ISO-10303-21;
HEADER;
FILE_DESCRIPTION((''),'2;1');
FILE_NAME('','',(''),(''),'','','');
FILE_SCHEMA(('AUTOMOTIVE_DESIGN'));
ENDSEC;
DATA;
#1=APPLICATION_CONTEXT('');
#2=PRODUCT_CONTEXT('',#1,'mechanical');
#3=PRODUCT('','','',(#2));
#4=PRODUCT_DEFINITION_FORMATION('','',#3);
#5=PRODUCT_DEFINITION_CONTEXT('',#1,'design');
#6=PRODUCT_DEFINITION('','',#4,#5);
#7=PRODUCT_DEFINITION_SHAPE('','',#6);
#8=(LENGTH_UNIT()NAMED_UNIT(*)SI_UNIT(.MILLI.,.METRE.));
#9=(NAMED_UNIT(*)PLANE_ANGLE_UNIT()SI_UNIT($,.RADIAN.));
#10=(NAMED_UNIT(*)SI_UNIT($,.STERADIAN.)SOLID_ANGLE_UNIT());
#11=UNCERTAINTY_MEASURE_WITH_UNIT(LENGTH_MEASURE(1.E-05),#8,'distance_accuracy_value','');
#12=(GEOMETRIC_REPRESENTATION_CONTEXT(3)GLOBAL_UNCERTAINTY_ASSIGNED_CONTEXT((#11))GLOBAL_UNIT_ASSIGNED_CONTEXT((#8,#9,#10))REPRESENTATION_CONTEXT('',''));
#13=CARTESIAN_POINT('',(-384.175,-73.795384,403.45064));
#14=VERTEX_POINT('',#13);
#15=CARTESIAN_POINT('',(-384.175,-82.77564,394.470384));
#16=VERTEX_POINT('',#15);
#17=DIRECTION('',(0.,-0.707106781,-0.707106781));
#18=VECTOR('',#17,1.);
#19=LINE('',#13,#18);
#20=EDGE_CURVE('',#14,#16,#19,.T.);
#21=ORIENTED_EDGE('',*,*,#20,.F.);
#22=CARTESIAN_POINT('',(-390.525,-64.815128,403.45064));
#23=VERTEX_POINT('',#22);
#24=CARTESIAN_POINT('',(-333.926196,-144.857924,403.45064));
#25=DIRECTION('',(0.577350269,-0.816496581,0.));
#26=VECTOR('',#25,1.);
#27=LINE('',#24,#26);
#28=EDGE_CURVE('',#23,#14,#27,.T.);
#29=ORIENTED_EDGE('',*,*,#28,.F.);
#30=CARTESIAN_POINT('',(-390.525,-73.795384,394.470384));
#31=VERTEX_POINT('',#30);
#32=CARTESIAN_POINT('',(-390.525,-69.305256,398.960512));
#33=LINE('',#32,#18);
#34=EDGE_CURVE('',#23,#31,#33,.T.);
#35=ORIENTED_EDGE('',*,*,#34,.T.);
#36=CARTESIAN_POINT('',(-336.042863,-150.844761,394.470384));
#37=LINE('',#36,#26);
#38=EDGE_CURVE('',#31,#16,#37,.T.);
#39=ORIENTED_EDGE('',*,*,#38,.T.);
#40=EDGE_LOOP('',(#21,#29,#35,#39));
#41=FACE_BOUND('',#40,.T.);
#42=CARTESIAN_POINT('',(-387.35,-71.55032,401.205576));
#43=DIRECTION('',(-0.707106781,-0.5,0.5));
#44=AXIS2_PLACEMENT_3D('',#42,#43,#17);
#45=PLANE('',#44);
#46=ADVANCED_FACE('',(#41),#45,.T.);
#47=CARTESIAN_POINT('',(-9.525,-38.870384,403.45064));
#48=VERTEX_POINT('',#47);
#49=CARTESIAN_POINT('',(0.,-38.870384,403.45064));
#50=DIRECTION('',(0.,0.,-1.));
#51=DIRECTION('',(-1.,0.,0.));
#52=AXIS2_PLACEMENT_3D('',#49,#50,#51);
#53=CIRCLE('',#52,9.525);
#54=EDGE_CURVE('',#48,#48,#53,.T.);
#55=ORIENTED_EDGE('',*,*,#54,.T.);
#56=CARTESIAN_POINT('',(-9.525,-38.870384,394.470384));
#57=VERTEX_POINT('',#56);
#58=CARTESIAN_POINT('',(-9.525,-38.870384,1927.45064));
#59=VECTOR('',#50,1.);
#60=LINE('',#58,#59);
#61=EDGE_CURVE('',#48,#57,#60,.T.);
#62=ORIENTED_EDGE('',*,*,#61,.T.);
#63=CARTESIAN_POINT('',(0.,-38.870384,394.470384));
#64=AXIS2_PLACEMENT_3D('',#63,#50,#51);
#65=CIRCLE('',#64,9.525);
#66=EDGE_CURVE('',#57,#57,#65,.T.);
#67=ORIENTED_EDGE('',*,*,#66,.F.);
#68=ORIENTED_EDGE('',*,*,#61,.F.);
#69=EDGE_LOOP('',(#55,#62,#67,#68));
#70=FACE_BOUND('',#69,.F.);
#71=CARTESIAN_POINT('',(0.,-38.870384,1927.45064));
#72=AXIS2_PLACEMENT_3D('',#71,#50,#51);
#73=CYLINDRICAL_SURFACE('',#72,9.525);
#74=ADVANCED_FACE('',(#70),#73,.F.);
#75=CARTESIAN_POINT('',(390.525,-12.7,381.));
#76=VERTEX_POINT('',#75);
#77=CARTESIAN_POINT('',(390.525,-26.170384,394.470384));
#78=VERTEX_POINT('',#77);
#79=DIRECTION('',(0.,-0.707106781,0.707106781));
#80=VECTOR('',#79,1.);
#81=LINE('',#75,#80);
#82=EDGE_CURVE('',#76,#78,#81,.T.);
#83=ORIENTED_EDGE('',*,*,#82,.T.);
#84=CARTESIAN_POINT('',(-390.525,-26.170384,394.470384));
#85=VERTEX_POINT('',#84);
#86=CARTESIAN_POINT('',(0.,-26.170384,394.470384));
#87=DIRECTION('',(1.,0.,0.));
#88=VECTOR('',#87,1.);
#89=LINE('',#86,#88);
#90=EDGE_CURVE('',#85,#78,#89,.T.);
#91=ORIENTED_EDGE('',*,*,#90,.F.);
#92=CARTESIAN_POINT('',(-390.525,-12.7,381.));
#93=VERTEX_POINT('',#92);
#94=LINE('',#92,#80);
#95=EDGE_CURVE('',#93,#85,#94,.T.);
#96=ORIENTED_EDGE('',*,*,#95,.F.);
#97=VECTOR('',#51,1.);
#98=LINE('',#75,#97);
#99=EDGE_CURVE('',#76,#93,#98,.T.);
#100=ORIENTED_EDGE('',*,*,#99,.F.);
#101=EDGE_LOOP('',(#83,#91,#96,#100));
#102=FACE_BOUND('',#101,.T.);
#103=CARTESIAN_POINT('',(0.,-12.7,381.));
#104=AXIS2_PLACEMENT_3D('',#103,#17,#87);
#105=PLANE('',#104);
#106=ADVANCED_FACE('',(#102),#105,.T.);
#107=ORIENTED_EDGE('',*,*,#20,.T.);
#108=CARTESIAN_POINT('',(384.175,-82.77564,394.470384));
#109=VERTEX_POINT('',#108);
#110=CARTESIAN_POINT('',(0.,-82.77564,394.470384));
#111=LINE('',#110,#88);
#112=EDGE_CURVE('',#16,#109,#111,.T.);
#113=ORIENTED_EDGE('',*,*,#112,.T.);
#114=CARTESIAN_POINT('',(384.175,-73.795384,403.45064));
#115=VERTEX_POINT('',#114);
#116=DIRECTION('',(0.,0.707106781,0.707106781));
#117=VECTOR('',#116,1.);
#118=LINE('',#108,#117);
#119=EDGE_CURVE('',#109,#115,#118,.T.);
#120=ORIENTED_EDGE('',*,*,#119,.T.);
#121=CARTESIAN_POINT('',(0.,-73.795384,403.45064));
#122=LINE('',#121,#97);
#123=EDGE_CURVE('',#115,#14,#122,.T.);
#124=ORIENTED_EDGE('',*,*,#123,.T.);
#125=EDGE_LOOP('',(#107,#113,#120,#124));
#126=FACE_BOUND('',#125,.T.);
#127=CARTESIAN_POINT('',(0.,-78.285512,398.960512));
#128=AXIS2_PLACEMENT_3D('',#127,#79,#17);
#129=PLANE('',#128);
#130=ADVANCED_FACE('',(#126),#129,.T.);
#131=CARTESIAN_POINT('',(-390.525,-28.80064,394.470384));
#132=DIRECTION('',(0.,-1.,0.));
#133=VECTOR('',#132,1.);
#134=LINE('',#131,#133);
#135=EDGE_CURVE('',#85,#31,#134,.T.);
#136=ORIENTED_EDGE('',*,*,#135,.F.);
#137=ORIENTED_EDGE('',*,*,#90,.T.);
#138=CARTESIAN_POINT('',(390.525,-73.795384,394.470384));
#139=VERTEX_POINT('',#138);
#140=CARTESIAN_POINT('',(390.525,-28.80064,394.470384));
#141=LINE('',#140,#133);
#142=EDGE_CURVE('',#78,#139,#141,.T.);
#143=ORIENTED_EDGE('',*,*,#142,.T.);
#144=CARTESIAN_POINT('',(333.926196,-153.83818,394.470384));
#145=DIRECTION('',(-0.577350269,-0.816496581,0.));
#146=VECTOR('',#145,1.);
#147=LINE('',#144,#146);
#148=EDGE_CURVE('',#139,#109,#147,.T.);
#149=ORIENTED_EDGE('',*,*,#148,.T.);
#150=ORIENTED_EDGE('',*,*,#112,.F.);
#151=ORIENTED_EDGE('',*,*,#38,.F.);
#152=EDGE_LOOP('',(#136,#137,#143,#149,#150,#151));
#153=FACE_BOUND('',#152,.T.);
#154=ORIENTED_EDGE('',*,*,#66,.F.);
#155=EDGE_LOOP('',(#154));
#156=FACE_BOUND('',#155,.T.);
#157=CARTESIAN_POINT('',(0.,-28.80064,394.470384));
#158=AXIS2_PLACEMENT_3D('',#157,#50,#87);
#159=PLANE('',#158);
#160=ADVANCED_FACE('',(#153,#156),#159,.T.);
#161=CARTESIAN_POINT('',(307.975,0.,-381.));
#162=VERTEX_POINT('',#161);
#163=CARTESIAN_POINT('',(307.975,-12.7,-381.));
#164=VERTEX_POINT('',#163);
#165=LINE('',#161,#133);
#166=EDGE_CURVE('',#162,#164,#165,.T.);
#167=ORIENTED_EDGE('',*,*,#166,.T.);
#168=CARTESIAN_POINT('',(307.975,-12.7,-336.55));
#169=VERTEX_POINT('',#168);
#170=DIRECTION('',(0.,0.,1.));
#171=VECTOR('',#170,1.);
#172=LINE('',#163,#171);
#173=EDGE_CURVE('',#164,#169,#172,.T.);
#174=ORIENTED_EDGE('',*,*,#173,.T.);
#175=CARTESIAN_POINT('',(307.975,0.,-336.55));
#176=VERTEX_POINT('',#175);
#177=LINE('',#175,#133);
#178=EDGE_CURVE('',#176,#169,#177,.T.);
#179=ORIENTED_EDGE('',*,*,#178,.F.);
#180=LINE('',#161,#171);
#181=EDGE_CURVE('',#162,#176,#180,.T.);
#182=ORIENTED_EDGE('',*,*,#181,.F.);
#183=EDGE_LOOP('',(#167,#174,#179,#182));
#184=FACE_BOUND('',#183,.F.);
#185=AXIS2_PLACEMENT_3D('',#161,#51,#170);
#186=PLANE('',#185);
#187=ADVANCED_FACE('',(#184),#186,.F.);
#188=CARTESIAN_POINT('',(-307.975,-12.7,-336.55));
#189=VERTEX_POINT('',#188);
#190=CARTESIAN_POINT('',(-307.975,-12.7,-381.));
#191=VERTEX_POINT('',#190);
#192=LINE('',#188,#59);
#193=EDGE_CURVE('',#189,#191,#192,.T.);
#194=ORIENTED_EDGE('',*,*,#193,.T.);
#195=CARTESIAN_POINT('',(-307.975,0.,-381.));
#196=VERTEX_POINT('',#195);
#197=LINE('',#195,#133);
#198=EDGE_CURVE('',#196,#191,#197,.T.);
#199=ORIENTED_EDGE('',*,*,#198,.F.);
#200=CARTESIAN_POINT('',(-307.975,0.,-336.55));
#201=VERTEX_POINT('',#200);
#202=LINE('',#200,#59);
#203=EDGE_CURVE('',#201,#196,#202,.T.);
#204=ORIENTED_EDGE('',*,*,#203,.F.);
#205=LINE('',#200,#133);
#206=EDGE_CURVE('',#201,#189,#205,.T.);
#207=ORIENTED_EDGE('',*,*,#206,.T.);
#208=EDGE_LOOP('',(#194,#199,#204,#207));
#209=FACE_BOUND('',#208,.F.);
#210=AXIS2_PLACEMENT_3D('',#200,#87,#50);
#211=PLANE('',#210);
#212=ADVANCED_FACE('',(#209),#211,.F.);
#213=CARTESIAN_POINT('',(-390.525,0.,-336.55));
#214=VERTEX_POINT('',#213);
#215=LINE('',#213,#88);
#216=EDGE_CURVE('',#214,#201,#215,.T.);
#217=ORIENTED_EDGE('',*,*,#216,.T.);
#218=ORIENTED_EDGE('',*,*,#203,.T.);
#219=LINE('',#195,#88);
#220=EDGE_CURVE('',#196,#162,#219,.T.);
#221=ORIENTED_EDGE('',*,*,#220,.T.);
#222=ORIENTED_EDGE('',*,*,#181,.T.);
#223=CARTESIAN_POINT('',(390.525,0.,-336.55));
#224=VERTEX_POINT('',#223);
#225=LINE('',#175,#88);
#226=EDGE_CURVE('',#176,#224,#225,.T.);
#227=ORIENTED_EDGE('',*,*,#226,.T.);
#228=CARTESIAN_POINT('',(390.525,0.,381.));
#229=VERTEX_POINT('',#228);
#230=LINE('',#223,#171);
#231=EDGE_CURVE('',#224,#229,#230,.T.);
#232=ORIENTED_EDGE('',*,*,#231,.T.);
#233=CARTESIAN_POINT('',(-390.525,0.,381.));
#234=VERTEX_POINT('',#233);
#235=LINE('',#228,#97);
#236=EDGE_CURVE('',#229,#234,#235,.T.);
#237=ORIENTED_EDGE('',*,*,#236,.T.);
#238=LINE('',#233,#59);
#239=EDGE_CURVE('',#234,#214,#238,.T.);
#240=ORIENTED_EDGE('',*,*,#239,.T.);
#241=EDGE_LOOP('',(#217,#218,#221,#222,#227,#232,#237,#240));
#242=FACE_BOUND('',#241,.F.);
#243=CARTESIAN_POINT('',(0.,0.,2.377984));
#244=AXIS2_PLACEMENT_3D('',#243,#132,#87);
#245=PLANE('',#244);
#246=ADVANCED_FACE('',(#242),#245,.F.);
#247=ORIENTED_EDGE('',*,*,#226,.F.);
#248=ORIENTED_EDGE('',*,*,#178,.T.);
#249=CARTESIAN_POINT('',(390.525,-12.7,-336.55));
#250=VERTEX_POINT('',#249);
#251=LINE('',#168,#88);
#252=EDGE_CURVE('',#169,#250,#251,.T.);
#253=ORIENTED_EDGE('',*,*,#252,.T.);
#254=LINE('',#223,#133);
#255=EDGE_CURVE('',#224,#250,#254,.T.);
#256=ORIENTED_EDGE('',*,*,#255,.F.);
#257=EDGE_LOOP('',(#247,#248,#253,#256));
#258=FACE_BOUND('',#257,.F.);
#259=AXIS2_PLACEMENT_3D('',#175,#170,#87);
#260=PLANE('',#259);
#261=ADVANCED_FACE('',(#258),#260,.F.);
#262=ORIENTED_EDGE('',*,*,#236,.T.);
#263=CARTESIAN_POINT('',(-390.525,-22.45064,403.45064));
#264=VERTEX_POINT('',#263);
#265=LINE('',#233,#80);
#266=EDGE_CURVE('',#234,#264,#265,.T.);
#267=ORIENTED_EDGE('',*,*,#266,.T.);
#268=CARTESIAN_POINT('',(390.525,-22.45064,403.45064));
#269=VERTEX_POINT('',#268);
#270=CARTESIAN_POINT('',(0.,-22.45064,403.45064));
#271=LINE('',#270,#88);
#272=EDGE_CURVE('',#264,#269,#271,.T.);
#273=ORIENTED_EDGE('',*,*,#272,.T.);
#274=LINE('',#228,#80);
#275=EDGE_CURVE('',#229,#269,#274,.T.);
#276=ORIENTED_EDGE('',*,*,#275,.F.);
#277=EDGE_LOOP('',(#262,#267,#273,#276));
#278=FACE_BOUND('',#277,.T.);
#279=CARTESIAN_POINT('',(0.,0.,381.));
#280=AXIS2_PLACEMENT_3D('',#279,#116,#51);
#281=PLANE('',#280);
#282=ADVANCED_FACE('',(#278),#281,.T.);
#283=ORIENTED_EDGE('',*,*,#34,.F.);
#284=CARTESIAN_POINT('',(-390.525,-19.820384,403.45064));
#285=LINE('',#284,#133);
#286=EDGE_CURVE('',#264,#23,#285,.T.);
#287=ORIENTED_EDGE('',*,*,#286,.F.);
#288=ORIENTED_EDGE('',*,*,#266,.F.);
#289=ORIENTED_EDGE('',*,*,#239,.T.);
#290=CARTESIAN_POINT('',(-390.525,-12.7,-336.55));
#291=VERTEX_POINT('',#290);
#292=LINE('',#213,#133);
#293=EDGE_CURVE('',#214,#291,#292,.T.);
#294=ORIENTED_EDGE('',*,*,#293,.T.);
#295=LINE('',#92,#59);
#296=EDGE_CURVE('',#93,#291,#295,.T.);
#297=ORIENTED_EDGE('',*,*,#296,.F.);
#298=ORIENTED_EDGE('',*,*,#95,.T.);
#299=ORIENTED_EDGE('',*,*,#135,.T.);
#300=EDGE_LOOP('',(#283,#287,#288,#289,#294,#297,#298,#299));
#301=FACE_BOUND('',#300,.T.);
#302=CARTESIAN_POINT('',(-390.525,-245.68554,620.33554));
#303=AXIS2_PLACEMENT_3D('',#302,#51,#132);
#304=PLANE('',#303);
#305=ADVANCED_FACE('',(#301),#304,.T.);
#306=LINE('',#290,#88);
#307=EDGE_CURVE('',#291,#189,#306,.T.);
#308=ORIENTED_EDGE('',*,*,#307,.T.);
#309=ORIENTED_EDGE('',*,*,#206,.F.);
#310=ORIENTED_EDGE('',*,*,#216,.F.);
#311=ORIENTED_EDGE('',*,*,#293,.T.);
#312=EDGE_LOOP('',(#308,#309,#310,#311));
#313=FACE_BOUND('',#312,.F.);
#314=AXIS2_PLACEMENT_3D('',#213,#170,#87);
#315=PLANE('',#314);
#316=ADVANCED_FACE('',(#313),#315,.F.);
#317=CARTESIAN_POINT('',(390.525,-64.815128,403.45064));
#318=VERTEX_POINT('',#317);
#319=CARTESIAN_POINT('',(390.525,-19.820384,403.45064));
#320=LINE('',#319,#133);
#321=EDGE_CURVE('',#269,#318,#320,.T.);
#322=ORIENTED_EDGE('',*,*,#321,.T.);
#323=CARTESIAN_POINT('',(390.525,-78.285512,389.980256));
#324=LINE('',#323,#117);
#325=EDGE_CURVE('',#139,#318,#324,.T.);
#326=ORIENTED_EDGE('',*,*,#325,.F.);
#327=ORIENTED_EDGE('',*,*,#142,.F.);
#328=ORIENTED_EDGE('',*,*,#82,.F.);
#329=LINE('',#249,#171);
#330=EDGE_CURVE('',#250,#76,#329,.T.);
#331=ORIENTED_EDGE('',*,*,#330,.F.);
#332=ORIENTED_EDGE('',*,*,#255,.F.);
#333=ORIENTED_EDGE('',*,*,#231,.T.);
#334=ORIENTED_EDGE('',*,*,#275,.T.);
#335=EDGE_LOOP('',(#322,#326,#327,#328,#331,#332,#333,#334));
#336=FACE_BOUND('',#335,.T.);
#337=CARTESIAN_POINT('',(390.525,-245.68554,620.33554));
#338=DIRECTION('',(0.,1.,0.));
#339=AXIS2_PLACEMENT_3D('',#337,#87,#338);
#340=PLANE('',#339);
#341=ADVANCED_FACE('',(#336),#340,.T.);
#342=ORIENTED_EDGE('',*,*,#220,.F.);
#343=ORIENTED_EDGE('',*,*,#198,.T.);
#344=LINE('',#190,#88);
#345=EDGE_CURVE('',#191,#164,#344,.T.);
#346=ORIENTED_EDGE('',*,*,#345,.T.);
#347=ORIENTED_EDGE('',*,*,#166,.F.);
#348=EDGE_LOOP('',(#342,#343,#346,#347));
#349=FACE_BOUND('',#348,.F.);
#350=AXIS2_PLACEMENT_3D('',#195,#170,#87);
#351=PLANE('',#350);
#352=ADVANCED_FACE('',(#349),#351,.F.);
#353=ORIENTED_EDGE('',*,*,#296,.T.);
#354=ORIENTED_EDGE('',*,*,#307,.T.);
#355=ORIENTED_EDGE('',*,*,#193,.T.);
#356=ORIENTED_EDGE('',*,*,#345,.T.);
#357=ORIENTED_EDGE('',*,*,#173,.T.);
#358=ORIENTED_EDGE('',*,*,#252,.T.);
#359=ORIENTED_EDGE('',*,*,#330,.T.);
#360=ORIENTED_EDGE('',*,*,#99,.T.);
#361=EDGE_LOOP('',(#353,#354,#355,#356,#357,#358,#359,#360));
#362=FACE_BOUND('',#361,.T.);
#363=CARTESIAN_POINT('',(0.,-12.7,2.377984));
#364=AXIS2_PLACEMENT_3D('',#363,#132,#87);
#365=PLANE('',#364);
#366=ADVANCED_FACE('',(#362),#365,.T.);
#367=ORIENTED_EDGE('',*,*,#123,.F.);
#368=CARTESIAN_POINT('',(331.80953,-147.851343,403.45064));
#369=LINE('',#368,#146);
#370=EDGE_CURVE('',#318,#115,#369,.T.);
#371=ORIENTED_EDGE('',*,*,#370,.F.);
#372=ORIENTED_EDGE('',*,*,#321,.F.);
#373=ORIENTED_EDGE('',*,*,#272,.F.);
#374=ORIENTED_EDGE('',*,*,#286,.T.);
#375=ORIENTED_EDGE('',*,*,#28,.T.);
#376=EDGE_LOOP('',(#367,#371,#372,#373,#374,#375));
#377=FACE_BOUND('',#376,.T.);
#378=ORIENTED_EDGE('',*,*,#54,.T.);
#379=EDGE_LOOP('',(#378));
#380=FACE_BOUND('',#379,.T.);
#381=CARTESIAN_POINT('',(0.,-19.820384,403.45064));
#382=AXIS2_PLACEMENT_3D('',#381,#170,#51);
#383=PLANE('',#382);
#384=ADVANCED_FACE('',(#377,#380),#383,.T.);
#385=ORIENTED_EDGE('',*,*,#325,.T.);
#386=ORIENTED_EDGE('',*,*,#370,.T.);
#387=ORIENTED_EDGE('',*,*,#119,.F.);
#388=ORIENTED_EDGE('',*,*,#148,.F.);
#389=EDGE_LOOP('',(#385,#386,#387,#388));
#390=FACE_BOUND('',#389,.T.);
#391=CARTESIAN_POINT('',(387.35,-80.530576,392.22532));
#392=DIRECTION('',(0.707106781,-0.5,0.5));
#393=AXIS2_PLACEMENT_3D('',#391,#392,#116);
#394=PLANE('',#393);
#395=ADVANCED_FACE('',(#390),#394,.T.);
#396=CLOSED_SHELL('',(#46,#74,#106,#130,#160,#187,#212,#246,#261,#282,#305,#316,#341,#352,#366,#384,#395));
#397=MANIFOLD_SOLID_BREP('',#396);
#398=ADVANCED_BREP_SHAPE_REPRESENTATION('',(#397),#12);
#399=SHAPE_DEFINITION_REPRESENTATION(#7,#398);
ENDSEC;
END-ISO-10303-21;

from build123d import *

# Parameters (mm, degrees)
F1_DEPTH   = 12.7
F1_FACE1_W = 781.05
F1_FACE1_H = 12.7
F4_SIZE    = 6.35
F6_D       = 19.05
F6_DEPTH   = 1524
F6_TIP     = 5.7231973962


with BuildPart() as f1:
    # F0 (on Front) → F1 (new body)
    with BuildSketch(Plane.XZ):
        Polygon((-307.975, -336.55), (-307.975, -381), (307.975, -381), (307.975, -336.55), (390.525, -336.55), (390.525, 381), (-390.525, 381), (-390.525, -336.55), align=None)
    extrude(amount=F1_DEPTH)

    # F3: sweep along a path in F2
    with BuildLine(Plane(origin=(-390.525, 0, 0), x_dir=(0, -1, 0), z_dir=(-1, 0, 0))) as f3_path:
        Line((6.35, 381), (24.3105122421, 398.9605122421))
        Line((24.3105122421, 398.9605122421), (78.2855122421, 398.9605122421))
    # F1_face1 (on face) → F3 (sweep)
    with BuildSketch(Plane(origin=(0, -6.35, 381), x_dir=(1, 0, 0), z_dir=(0, 0, 1))):
        Rectangle(F1_FACE1_W, F1_FACE1_H)
    sweep(path=f3_path.line, transition=Transition.RIGHT)

    # F4
    f4_edges = [f1.edges().sort_by_distance(p)[0] for p in [
        (-390.525, -78.285512, 398.960512),
        (390.525, -78.285512, 398.960512),
    ]]
    chamfer(f4_edges, length=F4_SIZE)

    # F6
    with Locations(Plane.XY.offset(403.4506403027)):
        with Locations((0, -38.8703841816)):
            Hole(F6_D / 2, depth=F6_DEPTH)
            with Locations((0, 0, -(F6_DEPTH + F6_TIP / 2))):  # 118° drill point
                Cone(0, F6_D / 2, F6_TIP, mode=Mode.SUBTRACT)


solid = f1.part
